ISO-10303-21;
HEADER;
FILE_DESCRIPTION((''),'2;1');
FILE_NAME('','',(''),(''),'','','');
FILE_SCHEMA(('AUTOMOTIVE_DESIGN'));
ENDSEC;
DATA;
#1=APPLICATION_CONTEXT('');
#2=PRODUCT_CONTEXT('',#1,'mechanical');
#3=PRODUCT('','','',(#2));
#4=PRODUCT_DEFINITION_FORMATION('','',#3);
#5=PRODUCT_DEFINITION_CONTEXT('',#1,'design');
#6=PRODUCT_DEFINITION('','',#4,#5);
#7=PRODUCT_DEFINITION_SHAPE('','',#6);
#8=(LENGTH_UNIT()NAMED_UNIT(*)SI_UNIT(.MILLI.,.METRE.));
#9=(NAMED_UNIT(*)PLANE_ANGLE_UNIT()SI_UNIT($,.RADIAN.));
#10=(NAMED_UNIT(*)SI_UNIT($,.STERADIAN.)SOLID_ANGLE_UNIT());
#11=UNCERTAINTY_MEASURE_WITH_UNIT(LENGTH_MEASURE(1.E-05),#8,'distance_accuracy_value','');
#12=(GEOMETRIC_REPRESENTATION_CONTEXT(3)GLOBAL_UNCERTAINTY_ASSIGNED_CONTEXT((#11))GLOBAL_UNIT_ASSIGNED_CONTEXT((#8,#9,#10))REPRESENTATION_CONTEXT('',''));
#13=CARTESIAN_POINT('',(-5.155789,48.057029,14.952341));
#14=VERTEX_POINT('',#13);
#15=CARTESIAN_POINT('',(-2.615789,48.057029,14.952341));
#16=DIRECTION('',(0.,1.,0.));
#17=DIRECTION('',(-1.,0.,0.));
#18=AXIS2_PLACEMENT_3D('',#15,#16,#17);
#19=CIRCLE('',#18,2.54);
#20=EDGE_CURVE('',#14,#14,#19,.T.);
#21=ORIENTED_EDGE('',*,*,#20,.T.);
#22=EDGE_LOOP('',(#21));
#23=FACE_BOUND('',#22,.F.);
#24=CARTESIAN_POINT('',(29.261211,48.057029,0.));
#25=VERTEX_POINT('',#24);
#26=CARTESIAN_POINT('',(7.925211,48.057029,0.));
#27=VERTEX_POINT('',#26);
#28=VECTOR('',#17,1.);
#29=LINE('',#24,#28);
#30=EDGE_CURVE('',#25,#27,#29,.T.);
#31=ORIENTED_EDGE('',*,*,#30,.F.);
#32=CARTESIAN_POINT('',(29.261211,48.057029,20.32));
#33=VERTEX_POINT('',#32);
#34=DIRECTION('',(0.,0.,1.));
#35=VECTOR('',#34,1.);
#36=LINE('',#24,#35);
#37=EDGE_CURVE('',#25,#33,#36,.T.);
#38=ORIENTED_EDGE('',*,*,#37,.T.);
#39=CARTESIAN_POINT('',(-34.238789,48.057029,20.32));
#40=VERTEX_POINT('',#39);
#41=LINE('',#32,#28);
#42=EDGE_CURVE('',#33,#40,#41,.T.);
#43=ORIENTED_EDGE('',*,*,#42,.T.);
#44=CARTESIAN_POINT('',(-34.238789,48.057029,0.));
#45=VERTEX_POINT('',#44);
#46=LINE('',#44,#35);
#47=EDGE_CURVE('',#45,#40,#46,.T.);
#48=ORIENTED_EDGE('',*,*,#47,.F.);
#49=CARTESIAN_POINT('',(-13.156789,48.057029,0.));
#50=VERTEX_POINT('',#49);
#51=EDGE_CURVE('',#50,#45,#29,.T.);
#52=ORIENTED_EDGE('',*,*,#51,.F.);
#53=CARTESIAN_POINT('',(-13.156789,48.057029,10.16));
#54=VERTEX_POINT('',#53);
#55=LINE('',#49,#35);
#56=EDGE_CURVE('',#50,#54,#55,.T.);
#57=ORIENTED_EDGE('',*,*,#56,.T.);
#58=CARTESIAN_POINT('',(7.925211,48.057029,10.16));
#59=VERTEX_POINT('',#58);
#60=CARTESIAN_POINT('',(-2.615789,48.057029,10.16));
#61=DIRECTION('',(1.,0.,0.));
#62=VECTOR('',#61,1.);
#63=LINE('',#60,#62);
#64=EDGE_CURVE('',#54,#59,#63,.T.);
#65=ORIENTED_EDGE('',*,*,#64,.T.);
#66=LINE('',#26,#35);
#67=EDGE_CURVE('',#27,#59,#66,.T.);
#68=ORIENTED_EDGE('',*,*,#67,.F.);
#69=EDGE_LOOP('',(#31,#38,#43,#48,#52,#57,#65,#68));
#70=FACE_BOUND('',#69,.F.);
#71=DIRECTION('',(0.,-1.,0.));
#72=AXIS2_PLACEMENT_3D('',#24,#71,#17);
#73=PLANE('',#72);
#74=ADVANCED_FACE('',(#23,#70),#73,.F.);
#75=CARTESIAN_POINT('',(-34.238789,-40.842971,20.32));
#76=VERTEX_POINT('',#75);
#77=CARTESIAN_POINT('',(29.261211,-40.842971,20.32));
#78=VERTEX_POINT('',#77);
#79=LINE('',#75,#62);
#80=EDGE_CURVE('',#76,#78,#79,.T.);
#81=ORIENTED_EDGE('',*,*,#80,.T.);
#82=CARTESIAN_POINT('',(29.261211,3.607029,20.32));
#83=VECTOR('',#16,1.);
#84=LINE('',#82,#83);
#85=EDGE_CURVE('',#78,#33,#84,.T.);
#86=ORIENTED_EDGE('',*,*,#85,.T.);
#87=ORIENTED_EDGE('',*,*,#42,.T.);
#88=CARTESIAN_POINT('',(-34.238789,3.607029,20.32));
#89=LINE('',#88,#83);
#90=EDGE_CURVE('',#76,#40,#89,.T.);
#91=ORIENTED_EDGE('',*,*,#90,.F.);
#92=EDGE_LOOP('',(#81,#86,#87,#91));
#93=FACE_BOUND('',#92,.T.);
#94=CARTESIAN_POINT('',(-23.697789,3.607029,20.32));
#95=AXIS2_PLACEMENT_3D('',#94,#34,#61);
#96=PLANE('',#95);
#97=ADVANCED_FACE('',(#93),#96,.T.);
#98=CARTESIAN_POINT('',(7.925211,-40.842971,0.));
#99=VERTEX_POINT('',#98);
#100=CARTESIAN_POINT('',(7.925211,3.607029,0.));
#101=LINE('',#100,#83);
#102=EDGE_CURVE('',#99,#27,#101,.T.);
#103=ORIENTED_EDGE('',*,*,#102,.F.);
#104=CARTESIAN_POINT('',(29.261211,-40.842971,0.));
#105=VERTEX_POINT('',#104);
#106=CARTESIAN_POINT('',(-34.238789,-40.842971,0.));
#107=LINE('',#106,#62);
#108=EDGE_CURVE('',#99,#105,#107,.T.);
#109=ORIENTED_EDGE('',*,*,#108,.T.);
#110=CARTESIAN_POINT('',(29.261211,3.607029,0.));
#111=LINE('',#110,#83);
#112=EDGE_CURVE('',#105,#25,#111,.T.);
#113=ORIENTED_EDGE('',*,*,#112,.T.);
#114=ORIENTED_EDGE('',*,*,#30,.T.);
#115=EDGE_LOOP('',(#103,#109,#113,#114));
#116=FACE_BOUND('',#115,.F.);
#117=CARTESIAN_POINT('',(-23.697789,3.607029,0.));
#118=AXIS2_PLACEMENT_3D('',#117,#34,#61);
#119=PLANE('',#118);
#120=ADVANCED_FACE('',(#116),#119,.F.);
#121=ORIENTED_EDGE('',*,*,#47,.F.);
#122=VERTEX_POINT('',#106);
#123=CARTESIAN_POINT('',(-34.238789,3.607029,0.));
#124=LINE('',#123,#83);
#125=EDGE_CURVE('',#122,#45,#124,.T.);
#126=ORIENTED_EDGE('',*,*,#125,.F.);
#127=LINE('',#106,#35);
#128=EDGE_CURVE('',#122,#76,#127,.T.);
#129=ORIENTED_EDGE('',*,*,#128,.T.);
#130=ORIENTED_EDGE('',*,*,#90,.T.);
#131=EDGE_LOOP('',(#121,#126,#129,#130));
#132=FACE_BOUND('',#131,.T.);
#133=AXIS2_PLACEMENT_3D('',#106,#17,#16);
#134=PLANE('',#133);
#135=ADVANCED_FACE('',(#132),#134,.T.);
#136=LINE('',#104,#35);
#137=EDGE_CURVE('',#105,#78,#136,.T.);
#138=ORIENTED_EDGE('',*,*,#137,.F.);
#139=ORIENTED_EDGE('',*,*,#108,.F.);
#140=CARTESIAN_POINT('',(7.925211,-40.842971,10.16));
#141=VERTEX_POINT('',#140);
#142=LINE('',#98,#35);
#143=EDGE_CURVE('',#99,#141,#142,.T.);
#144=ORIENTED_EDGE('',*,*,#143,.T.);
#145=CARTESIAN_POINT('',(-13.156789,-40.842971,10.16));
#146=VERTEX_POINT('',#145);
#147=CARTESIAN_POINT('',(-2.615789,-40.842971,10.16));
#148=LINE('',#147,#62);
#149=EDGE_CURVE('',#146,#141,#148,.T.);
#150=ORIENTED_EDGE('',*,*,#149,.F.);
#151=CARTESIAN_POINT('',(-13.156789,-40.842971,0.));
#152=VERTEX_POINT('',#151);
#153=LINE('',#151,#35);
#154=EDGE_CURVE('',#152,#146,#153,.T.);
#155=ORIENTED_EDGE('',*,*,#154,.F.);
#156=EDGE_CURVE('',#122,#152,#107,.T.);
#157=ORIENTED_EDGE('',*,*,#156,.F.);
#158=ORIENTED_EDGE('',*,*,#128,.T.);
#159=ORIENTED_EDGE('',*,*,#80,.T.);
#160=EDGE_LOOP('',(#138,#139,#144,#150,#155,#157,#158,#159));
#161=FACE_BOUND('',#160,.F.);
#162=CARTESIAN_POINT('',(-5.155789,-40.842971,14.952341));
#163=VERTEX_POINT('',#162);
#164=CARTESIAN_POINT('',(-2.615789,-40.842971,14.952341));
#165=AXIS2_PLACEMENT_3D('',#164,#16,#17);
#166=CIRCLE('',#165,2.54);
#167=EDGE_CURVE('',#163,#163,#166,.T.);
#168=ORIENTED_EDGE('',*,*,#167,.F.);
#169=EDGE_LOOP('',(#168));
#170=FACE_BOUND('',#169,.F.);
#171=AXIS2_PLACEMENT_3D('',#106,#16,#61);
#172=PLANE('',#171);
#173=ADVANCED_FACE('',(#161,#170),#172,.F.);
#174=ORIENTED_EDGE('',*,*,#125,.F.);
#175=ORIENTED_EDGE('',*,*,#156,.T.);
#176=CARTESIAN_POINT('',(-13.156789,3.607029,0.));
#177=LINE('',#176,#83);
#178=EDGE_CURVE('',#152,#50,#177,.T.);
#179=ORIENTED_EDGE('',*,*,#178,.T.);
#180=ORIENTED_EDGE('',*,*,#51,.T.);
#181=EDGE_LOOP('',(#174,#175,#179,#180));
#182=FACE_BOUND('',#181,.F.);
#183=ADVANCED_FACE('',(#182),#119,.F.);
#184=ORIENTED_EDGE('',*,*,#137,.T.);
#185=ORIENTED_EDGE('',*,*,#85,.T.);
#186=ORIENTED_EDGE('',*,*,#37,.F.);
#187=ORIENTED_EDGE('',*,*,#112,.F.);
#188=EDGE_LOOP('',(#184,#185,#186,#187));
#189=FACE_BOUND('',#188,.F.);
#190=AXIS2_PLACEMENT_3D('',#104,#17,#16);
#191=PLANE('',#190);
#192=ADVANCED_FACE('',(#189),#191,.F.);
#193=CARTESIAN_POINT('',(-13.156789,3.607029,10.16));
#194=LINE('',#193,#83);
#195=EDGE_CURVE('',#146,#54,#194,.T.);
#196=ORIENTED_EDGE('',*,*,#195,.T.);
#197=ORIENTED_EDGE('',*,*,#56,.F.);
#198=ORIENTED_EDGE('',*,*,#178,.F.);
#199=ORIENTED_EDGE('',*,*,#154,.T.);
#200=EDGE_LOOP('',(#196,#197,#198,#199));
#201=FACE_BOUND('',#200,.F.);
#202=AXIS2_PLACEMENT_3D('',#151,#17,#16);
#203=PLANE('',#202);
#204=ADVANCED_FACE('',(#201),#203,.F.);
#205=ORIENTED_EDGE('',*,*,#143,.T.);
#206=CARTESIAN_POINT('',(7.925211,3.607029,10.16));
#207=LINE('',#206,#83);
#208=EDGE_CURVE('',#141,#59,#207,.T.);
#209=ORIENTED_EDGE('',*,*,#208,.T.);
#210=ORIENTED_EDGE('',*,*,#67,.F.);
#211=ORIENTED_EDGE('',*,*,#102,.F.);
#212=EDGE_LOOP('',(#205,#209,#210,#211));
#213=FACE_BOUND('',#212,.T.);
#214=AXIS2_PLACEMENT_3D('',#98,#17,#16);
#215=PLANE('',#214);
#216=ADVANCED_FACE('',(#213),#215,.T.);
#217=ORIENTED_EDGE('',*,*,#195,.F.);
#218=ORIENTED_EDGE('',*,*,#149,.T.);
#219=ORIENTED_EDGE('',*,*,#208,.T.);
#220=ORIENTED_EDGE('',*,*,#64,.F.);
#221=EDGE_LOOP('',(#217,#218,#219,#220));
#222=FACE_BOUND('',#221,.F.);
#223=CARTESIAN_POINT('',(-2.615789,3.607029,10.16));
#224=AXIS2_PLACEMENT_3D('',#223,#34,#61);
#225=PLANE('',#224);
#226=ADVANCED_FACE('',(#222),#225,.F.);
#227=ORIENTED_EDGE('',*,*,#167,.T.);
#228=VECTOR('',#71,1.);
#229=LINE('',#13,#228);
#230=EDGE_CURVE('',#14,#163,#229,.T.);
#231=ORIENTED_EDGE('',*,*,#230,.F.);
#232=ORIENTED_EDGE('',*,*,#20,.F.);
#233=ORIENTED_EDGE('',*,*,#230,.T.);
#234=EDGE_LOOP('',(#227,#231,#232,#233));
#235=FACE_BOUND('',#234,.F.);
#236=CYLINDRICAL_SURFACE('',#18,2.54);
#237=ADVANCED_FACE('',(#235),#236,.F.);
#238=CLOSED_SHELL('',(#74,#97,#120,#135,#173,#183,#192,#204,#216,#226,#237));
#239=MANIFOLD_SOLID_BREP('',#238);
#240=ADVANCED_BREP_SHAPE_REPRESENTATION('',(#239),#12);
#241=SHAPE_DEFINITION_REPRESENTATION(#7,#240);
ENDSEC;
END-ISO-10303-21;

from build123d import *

# Parameters (mm, degrees)
F0_W     = 21.082
F0_H     = 88.9
F0_W_2   = 21.336
F1_DEPTH = 20.32
F2_DEPTH = 10.16
F3_R     = 2.54
F5_DEPTH = 88.9


# Not quite as in the source:
# - the program builds the solid bodies; features that only make, move or delete a surface that nothing else refers to are left out


with BuildPart() as f1:
    # F0 (on Top) → F1 (new body)
    with BuildSketch(Plane.XY):
        with Locations((-23.6977891486, 3.6070292577)):
            Rectangle(F0_W, F0_H)
        with Locations((-2.6157891486, 3.6070292577)):
            Rectangle(F0_W, F0_H)
        with Locations((18.5932108514, 3.6070292577)):
            Rectangle(F0_W_2, F0_H)
    extrude(amount=F1_DEPTH)

    # F0 (on Top) → F2 (cut)
    with BuildSketch(Plane.XY):
        with Locations((-2.6157891486, 3.6070292577)):
            Rectangle(F0_W, F0_H)
    extrude(amount=F2_DEPTH, mode=Mode.SUBTRACT)

    # F3 (on face) → F5 (cut)
    with BuildSketch(Plane(origin=(0, 48.0570292577, 0), x_dir=(-1, 0, 0), z_dir=(0, 1, 0))):
        with Locations((2.6157891486, 14.9523410946)):
            Circle(F3_R)
    extrude(amount=-F5_DEPTH, mode=Mode.SUBTRACT)


solid = f1.part
